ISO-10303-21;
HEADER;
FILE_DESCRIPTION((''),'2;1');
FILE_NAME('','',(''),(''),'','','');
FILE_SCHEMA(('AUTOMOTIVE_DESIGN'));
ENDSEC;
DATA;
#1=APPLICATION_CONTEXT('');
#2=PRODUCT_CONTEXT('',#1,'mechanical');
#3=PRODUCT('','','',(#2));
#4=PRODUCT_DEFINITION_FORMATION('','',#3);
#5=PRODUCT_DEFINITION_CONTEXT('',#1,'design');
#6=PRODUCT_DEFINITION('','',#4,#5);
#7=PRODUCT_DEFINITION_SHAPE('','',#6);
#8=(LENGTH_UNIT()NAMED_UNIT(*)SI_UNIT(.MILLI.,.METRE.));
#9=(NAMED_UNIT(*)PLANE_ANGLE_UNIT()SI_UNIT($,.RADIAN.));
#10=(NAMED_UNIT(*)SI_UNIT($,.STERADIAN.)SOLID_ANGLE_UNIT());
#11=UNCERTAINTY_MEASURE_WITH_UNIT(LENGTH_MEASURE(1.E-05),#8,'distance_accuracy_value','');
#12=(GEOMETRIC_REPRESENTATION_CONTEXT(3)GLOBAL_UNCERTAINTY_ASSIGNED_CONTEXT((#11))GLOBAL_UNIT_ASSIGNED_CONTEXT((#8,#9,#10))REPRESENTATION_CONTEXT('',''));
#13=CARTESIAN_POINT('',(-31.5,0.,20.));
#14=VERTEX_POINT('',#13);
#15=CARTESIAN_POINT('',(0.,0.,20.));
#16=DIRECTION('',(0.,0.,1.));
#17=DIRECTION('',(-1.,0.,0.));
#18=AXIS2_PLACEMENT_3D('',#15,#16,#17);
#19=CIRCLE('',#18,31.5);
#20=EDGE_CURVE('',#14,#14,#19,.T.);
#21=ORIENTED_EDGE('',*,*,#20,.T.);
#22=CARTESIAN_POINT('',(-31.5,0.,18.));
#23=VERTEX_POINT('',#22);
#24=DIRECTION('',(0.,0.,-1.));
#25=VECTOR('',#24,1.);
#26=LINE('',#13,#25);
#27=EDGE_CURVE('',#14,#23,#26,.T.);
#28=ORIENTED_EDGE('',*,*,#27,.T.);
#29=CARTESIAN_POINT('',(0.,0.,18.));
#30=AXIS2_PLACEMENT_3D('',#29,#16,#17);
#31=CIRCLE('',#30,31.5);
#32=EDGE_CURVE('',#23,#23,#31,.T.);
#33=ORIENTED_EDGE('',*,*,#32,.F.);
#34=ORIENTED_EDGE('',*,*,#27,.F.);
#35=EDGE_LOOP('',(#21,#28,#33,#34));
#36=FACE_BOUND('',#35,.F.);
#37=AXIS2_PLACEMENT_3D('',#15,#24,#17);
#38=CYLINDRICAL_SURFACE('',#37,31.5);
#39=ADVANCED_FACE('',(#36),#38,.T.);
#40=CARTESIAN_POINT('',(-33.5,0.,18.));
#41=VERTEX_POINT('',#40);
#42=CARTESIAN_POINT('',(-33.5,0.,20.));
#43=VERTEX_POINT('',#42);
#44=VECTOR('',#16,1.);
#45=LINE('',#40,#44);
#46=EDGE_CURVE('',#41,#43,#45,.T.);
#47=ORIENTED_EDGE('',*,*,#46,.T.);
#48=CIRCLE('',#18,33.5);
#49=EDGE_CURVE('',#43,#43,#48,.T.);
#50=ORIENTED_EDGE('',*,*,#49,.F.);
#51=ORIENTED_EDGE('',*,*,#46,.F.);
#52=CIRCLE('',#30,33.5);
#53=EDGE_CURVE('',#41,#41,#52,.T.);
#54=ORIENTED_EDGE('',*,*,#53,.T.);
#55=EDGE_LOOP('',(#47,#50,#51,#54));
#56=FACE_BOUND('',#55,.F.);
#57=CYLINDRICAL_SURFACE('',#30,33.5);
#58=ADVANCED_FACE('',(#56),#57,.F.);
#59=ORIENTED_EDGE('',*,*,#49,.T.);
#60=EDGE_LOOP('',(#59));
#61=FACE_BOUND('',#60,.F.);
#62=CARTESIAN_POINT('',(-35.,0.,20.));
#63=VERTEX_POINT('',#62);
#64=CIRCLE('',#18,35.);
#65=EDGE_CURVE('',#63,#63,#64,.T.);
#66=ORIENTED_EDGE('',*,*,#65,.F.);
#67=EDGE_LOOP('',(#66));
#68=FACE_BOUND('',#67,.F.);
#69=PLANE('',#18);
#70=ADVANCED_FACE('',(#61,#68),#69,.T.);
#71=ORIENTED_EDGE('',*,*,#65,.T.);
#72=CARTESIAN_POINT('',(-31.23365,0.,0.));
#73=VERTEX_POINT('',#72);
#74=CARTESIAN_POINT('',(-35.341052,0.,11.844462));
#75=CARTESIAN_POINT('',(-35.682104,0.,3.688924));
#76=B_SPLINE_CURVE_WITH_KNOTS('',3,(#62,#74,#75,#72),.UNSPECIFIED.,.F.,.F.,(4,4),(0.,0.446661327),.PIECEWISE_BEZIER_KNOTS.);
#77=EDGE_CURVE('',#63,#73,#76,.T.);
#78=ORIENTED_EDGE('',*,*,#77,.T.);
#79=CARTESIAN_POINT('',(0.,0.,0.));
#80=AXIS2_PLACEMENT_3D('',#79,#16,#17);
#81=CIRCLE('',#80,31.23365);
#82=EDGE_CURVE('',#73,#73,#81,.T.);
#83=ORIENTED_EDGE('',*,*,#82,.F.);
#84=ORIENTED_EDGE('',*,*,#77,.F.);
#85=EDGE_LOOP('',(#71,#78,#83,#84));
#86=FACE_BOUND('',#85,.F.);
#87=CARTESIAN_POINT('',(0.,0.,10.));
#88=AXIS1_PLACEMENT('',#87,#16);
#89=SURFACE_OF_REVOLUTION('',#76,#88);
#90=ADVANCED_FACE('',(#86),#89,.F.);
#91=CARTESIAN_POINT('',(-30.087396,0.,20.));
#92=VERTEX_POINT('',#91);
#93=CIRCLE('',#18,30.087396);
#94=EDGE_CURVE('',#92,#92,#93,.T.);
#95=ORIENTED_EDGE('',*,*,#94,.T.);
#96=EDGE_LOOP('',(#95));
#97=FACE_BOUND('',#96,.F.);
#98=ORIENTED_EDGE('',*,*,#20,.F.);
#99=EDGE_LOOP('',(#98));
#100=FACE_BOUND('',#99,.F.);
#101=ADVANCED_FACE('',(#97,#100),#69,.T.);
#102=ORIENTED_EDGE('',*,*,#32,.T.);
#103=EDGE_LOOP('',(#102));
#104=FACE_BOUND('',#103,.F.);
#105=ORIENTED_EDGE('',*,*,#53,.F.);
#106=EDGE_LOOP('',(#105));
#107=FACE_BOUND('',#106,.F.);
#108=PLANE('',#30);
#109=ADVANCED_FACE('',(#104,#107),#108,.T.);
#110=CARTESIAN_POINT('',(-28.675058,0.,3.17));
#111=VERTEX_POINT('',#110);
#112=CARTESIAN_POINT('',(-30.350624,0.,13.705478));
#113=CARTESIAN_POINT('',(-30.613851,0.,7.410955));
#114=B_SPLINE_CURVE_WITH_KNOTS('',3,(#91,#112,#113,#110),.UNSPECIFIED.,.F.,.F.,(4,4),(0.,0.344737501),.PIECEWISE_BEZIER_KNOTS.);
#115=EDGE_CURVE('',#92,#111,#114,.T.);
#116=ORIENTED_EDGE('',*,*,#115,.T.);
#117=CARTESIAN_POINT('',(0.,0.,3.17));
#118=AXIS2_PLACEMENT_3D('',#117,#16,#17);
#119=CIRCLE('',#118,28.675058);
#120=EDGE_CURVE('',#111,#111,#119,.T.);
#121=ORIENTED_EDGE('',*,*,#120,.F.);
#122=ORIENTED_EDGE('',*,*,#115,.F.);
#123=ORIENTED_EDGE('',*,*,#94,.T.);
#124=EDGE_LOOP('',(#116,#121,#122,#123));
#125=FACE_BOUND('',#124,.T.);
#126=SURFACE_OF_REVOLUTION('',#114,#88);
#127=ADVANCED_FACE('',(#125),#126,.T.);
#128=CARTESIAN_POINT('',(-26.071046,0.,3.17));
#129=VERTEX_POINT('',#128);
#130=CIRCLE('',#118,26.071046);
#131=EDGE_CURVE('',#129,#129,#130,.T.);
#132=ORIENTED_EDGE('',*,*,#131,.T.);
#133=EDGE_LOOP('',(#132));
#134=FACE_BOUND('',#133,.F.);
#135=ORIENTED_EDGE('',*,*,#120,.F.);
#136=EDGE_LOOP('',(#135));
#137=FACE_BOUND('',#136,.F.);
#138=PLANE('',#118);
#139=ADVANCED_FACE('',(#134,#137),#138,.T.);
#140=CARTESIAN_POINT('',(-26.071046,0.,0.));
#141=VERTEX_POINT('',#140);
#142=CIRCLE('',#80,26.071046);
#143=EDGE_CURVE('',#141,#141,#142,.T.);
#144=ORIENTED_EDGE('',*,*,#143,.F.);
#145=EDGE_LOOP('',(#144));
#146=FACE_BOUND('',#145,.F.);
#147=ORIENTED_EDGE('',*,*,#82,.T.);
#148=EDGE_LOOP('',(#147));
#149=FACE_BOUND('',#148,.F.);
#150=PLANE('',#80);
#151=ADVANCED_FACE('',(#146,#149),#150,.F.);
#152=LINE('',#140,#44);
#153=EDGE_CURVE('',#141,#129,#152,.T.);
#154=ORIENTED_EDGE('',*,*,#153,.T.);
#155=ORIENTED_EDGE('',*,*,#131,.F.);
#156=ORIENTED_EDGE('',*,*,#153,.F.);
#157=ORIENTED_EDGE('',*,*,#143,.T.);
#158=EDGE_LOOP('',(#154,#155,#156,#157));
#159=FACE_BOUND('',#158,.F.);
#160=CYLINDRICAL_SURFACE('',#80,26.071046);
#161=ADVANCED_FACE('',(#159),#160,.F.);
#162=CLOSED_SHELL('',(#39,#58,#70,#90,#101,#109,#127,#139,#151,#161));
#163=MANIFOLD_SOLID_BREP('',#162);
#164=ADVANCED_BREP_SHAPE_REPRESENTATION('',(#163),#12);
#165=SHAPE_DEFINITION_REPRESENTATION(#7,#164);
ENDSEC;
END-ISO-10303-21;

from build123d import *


with BuildPart() as f1:
    # F0 (on Front) → F1 (revolve)
    with BuildSketch(Plane.XZ):
        with BuildLine():
            Line((-26.3210460544, 0), (-26.0710460544, 0))
            Line((-26.0710460544, 0), (-26.0710460544, 1))
            Line((-26.0710460544, 1), (-26.0710460544, 3.17))
            Line((-26.0710460544, 3.17), (-28.6750581009, 3.17))
            add(Edge.make_bspline(
                [(-28.6750581009, 3.17), (-28.1018416546, 1.9161346878), (-27.3361407248, 0.8417771508), (-26.3210460544, 0)],
                knots=[0.3447375005, 0.3447375005, 0.3447375005, 0.3447375005, 0.4466613269, 0.4466613269, 0.4466613269, 0.4466613269], degree=3))
        make_face()
        with BuildLine():
            Line((-31.2336497009, 0), (-26.3210460544, 0))
            add(Edge.make_bspline(
                [(-28.6750581009, 3.17), (-28.1018416546, 1.9161346878), (-27.3361407248, 0.8417771508), (-26.3210460544, 0)],
                knots=[0.3447375005, 0.3447375005, 0.3447375005, 0.3447375005, 0.4466613269, 0.4466613269, 0.4466613269, 0.4466613269], degree=3))
            add(Edge.make_bspline(
                [(-30.0873963535, 20), (-30.3506237455, 13.7054776587), (-30.6138511374, 7.4109553174), (-28.6750581009, 3.17)],
                knots=[0, 0, 0, 0, 0.3447375005, 0.3447375005, 0.3447375005, 0.3447375005], degree=3))
            Line((-30.0873963535, 20), (-31.5, 20))
            Line((-31.5, 20), (-31.5, 18))
            Line((-31.5, 18), (-33.5, 18))
            Line((-33.5, 18), (-33.5, 20))
            Line((-33.5, 20), (-35, 20))
            add(Edge.make_bspline(
                [(-35, 20), (-35.3410522383, 11.8444622436), (-35.6821044767, 3.6889244871), (-31.2336497009, 0)],
                knots=[0, 0, 0, 0, 0.4466613269, 0.4466613269, 0.4466613269, 0.4466613269], degree=3))
        make_face()
    revolve(axis=Axis((0, 0, 10), (0, 0, 1)))


solid = f1.part
